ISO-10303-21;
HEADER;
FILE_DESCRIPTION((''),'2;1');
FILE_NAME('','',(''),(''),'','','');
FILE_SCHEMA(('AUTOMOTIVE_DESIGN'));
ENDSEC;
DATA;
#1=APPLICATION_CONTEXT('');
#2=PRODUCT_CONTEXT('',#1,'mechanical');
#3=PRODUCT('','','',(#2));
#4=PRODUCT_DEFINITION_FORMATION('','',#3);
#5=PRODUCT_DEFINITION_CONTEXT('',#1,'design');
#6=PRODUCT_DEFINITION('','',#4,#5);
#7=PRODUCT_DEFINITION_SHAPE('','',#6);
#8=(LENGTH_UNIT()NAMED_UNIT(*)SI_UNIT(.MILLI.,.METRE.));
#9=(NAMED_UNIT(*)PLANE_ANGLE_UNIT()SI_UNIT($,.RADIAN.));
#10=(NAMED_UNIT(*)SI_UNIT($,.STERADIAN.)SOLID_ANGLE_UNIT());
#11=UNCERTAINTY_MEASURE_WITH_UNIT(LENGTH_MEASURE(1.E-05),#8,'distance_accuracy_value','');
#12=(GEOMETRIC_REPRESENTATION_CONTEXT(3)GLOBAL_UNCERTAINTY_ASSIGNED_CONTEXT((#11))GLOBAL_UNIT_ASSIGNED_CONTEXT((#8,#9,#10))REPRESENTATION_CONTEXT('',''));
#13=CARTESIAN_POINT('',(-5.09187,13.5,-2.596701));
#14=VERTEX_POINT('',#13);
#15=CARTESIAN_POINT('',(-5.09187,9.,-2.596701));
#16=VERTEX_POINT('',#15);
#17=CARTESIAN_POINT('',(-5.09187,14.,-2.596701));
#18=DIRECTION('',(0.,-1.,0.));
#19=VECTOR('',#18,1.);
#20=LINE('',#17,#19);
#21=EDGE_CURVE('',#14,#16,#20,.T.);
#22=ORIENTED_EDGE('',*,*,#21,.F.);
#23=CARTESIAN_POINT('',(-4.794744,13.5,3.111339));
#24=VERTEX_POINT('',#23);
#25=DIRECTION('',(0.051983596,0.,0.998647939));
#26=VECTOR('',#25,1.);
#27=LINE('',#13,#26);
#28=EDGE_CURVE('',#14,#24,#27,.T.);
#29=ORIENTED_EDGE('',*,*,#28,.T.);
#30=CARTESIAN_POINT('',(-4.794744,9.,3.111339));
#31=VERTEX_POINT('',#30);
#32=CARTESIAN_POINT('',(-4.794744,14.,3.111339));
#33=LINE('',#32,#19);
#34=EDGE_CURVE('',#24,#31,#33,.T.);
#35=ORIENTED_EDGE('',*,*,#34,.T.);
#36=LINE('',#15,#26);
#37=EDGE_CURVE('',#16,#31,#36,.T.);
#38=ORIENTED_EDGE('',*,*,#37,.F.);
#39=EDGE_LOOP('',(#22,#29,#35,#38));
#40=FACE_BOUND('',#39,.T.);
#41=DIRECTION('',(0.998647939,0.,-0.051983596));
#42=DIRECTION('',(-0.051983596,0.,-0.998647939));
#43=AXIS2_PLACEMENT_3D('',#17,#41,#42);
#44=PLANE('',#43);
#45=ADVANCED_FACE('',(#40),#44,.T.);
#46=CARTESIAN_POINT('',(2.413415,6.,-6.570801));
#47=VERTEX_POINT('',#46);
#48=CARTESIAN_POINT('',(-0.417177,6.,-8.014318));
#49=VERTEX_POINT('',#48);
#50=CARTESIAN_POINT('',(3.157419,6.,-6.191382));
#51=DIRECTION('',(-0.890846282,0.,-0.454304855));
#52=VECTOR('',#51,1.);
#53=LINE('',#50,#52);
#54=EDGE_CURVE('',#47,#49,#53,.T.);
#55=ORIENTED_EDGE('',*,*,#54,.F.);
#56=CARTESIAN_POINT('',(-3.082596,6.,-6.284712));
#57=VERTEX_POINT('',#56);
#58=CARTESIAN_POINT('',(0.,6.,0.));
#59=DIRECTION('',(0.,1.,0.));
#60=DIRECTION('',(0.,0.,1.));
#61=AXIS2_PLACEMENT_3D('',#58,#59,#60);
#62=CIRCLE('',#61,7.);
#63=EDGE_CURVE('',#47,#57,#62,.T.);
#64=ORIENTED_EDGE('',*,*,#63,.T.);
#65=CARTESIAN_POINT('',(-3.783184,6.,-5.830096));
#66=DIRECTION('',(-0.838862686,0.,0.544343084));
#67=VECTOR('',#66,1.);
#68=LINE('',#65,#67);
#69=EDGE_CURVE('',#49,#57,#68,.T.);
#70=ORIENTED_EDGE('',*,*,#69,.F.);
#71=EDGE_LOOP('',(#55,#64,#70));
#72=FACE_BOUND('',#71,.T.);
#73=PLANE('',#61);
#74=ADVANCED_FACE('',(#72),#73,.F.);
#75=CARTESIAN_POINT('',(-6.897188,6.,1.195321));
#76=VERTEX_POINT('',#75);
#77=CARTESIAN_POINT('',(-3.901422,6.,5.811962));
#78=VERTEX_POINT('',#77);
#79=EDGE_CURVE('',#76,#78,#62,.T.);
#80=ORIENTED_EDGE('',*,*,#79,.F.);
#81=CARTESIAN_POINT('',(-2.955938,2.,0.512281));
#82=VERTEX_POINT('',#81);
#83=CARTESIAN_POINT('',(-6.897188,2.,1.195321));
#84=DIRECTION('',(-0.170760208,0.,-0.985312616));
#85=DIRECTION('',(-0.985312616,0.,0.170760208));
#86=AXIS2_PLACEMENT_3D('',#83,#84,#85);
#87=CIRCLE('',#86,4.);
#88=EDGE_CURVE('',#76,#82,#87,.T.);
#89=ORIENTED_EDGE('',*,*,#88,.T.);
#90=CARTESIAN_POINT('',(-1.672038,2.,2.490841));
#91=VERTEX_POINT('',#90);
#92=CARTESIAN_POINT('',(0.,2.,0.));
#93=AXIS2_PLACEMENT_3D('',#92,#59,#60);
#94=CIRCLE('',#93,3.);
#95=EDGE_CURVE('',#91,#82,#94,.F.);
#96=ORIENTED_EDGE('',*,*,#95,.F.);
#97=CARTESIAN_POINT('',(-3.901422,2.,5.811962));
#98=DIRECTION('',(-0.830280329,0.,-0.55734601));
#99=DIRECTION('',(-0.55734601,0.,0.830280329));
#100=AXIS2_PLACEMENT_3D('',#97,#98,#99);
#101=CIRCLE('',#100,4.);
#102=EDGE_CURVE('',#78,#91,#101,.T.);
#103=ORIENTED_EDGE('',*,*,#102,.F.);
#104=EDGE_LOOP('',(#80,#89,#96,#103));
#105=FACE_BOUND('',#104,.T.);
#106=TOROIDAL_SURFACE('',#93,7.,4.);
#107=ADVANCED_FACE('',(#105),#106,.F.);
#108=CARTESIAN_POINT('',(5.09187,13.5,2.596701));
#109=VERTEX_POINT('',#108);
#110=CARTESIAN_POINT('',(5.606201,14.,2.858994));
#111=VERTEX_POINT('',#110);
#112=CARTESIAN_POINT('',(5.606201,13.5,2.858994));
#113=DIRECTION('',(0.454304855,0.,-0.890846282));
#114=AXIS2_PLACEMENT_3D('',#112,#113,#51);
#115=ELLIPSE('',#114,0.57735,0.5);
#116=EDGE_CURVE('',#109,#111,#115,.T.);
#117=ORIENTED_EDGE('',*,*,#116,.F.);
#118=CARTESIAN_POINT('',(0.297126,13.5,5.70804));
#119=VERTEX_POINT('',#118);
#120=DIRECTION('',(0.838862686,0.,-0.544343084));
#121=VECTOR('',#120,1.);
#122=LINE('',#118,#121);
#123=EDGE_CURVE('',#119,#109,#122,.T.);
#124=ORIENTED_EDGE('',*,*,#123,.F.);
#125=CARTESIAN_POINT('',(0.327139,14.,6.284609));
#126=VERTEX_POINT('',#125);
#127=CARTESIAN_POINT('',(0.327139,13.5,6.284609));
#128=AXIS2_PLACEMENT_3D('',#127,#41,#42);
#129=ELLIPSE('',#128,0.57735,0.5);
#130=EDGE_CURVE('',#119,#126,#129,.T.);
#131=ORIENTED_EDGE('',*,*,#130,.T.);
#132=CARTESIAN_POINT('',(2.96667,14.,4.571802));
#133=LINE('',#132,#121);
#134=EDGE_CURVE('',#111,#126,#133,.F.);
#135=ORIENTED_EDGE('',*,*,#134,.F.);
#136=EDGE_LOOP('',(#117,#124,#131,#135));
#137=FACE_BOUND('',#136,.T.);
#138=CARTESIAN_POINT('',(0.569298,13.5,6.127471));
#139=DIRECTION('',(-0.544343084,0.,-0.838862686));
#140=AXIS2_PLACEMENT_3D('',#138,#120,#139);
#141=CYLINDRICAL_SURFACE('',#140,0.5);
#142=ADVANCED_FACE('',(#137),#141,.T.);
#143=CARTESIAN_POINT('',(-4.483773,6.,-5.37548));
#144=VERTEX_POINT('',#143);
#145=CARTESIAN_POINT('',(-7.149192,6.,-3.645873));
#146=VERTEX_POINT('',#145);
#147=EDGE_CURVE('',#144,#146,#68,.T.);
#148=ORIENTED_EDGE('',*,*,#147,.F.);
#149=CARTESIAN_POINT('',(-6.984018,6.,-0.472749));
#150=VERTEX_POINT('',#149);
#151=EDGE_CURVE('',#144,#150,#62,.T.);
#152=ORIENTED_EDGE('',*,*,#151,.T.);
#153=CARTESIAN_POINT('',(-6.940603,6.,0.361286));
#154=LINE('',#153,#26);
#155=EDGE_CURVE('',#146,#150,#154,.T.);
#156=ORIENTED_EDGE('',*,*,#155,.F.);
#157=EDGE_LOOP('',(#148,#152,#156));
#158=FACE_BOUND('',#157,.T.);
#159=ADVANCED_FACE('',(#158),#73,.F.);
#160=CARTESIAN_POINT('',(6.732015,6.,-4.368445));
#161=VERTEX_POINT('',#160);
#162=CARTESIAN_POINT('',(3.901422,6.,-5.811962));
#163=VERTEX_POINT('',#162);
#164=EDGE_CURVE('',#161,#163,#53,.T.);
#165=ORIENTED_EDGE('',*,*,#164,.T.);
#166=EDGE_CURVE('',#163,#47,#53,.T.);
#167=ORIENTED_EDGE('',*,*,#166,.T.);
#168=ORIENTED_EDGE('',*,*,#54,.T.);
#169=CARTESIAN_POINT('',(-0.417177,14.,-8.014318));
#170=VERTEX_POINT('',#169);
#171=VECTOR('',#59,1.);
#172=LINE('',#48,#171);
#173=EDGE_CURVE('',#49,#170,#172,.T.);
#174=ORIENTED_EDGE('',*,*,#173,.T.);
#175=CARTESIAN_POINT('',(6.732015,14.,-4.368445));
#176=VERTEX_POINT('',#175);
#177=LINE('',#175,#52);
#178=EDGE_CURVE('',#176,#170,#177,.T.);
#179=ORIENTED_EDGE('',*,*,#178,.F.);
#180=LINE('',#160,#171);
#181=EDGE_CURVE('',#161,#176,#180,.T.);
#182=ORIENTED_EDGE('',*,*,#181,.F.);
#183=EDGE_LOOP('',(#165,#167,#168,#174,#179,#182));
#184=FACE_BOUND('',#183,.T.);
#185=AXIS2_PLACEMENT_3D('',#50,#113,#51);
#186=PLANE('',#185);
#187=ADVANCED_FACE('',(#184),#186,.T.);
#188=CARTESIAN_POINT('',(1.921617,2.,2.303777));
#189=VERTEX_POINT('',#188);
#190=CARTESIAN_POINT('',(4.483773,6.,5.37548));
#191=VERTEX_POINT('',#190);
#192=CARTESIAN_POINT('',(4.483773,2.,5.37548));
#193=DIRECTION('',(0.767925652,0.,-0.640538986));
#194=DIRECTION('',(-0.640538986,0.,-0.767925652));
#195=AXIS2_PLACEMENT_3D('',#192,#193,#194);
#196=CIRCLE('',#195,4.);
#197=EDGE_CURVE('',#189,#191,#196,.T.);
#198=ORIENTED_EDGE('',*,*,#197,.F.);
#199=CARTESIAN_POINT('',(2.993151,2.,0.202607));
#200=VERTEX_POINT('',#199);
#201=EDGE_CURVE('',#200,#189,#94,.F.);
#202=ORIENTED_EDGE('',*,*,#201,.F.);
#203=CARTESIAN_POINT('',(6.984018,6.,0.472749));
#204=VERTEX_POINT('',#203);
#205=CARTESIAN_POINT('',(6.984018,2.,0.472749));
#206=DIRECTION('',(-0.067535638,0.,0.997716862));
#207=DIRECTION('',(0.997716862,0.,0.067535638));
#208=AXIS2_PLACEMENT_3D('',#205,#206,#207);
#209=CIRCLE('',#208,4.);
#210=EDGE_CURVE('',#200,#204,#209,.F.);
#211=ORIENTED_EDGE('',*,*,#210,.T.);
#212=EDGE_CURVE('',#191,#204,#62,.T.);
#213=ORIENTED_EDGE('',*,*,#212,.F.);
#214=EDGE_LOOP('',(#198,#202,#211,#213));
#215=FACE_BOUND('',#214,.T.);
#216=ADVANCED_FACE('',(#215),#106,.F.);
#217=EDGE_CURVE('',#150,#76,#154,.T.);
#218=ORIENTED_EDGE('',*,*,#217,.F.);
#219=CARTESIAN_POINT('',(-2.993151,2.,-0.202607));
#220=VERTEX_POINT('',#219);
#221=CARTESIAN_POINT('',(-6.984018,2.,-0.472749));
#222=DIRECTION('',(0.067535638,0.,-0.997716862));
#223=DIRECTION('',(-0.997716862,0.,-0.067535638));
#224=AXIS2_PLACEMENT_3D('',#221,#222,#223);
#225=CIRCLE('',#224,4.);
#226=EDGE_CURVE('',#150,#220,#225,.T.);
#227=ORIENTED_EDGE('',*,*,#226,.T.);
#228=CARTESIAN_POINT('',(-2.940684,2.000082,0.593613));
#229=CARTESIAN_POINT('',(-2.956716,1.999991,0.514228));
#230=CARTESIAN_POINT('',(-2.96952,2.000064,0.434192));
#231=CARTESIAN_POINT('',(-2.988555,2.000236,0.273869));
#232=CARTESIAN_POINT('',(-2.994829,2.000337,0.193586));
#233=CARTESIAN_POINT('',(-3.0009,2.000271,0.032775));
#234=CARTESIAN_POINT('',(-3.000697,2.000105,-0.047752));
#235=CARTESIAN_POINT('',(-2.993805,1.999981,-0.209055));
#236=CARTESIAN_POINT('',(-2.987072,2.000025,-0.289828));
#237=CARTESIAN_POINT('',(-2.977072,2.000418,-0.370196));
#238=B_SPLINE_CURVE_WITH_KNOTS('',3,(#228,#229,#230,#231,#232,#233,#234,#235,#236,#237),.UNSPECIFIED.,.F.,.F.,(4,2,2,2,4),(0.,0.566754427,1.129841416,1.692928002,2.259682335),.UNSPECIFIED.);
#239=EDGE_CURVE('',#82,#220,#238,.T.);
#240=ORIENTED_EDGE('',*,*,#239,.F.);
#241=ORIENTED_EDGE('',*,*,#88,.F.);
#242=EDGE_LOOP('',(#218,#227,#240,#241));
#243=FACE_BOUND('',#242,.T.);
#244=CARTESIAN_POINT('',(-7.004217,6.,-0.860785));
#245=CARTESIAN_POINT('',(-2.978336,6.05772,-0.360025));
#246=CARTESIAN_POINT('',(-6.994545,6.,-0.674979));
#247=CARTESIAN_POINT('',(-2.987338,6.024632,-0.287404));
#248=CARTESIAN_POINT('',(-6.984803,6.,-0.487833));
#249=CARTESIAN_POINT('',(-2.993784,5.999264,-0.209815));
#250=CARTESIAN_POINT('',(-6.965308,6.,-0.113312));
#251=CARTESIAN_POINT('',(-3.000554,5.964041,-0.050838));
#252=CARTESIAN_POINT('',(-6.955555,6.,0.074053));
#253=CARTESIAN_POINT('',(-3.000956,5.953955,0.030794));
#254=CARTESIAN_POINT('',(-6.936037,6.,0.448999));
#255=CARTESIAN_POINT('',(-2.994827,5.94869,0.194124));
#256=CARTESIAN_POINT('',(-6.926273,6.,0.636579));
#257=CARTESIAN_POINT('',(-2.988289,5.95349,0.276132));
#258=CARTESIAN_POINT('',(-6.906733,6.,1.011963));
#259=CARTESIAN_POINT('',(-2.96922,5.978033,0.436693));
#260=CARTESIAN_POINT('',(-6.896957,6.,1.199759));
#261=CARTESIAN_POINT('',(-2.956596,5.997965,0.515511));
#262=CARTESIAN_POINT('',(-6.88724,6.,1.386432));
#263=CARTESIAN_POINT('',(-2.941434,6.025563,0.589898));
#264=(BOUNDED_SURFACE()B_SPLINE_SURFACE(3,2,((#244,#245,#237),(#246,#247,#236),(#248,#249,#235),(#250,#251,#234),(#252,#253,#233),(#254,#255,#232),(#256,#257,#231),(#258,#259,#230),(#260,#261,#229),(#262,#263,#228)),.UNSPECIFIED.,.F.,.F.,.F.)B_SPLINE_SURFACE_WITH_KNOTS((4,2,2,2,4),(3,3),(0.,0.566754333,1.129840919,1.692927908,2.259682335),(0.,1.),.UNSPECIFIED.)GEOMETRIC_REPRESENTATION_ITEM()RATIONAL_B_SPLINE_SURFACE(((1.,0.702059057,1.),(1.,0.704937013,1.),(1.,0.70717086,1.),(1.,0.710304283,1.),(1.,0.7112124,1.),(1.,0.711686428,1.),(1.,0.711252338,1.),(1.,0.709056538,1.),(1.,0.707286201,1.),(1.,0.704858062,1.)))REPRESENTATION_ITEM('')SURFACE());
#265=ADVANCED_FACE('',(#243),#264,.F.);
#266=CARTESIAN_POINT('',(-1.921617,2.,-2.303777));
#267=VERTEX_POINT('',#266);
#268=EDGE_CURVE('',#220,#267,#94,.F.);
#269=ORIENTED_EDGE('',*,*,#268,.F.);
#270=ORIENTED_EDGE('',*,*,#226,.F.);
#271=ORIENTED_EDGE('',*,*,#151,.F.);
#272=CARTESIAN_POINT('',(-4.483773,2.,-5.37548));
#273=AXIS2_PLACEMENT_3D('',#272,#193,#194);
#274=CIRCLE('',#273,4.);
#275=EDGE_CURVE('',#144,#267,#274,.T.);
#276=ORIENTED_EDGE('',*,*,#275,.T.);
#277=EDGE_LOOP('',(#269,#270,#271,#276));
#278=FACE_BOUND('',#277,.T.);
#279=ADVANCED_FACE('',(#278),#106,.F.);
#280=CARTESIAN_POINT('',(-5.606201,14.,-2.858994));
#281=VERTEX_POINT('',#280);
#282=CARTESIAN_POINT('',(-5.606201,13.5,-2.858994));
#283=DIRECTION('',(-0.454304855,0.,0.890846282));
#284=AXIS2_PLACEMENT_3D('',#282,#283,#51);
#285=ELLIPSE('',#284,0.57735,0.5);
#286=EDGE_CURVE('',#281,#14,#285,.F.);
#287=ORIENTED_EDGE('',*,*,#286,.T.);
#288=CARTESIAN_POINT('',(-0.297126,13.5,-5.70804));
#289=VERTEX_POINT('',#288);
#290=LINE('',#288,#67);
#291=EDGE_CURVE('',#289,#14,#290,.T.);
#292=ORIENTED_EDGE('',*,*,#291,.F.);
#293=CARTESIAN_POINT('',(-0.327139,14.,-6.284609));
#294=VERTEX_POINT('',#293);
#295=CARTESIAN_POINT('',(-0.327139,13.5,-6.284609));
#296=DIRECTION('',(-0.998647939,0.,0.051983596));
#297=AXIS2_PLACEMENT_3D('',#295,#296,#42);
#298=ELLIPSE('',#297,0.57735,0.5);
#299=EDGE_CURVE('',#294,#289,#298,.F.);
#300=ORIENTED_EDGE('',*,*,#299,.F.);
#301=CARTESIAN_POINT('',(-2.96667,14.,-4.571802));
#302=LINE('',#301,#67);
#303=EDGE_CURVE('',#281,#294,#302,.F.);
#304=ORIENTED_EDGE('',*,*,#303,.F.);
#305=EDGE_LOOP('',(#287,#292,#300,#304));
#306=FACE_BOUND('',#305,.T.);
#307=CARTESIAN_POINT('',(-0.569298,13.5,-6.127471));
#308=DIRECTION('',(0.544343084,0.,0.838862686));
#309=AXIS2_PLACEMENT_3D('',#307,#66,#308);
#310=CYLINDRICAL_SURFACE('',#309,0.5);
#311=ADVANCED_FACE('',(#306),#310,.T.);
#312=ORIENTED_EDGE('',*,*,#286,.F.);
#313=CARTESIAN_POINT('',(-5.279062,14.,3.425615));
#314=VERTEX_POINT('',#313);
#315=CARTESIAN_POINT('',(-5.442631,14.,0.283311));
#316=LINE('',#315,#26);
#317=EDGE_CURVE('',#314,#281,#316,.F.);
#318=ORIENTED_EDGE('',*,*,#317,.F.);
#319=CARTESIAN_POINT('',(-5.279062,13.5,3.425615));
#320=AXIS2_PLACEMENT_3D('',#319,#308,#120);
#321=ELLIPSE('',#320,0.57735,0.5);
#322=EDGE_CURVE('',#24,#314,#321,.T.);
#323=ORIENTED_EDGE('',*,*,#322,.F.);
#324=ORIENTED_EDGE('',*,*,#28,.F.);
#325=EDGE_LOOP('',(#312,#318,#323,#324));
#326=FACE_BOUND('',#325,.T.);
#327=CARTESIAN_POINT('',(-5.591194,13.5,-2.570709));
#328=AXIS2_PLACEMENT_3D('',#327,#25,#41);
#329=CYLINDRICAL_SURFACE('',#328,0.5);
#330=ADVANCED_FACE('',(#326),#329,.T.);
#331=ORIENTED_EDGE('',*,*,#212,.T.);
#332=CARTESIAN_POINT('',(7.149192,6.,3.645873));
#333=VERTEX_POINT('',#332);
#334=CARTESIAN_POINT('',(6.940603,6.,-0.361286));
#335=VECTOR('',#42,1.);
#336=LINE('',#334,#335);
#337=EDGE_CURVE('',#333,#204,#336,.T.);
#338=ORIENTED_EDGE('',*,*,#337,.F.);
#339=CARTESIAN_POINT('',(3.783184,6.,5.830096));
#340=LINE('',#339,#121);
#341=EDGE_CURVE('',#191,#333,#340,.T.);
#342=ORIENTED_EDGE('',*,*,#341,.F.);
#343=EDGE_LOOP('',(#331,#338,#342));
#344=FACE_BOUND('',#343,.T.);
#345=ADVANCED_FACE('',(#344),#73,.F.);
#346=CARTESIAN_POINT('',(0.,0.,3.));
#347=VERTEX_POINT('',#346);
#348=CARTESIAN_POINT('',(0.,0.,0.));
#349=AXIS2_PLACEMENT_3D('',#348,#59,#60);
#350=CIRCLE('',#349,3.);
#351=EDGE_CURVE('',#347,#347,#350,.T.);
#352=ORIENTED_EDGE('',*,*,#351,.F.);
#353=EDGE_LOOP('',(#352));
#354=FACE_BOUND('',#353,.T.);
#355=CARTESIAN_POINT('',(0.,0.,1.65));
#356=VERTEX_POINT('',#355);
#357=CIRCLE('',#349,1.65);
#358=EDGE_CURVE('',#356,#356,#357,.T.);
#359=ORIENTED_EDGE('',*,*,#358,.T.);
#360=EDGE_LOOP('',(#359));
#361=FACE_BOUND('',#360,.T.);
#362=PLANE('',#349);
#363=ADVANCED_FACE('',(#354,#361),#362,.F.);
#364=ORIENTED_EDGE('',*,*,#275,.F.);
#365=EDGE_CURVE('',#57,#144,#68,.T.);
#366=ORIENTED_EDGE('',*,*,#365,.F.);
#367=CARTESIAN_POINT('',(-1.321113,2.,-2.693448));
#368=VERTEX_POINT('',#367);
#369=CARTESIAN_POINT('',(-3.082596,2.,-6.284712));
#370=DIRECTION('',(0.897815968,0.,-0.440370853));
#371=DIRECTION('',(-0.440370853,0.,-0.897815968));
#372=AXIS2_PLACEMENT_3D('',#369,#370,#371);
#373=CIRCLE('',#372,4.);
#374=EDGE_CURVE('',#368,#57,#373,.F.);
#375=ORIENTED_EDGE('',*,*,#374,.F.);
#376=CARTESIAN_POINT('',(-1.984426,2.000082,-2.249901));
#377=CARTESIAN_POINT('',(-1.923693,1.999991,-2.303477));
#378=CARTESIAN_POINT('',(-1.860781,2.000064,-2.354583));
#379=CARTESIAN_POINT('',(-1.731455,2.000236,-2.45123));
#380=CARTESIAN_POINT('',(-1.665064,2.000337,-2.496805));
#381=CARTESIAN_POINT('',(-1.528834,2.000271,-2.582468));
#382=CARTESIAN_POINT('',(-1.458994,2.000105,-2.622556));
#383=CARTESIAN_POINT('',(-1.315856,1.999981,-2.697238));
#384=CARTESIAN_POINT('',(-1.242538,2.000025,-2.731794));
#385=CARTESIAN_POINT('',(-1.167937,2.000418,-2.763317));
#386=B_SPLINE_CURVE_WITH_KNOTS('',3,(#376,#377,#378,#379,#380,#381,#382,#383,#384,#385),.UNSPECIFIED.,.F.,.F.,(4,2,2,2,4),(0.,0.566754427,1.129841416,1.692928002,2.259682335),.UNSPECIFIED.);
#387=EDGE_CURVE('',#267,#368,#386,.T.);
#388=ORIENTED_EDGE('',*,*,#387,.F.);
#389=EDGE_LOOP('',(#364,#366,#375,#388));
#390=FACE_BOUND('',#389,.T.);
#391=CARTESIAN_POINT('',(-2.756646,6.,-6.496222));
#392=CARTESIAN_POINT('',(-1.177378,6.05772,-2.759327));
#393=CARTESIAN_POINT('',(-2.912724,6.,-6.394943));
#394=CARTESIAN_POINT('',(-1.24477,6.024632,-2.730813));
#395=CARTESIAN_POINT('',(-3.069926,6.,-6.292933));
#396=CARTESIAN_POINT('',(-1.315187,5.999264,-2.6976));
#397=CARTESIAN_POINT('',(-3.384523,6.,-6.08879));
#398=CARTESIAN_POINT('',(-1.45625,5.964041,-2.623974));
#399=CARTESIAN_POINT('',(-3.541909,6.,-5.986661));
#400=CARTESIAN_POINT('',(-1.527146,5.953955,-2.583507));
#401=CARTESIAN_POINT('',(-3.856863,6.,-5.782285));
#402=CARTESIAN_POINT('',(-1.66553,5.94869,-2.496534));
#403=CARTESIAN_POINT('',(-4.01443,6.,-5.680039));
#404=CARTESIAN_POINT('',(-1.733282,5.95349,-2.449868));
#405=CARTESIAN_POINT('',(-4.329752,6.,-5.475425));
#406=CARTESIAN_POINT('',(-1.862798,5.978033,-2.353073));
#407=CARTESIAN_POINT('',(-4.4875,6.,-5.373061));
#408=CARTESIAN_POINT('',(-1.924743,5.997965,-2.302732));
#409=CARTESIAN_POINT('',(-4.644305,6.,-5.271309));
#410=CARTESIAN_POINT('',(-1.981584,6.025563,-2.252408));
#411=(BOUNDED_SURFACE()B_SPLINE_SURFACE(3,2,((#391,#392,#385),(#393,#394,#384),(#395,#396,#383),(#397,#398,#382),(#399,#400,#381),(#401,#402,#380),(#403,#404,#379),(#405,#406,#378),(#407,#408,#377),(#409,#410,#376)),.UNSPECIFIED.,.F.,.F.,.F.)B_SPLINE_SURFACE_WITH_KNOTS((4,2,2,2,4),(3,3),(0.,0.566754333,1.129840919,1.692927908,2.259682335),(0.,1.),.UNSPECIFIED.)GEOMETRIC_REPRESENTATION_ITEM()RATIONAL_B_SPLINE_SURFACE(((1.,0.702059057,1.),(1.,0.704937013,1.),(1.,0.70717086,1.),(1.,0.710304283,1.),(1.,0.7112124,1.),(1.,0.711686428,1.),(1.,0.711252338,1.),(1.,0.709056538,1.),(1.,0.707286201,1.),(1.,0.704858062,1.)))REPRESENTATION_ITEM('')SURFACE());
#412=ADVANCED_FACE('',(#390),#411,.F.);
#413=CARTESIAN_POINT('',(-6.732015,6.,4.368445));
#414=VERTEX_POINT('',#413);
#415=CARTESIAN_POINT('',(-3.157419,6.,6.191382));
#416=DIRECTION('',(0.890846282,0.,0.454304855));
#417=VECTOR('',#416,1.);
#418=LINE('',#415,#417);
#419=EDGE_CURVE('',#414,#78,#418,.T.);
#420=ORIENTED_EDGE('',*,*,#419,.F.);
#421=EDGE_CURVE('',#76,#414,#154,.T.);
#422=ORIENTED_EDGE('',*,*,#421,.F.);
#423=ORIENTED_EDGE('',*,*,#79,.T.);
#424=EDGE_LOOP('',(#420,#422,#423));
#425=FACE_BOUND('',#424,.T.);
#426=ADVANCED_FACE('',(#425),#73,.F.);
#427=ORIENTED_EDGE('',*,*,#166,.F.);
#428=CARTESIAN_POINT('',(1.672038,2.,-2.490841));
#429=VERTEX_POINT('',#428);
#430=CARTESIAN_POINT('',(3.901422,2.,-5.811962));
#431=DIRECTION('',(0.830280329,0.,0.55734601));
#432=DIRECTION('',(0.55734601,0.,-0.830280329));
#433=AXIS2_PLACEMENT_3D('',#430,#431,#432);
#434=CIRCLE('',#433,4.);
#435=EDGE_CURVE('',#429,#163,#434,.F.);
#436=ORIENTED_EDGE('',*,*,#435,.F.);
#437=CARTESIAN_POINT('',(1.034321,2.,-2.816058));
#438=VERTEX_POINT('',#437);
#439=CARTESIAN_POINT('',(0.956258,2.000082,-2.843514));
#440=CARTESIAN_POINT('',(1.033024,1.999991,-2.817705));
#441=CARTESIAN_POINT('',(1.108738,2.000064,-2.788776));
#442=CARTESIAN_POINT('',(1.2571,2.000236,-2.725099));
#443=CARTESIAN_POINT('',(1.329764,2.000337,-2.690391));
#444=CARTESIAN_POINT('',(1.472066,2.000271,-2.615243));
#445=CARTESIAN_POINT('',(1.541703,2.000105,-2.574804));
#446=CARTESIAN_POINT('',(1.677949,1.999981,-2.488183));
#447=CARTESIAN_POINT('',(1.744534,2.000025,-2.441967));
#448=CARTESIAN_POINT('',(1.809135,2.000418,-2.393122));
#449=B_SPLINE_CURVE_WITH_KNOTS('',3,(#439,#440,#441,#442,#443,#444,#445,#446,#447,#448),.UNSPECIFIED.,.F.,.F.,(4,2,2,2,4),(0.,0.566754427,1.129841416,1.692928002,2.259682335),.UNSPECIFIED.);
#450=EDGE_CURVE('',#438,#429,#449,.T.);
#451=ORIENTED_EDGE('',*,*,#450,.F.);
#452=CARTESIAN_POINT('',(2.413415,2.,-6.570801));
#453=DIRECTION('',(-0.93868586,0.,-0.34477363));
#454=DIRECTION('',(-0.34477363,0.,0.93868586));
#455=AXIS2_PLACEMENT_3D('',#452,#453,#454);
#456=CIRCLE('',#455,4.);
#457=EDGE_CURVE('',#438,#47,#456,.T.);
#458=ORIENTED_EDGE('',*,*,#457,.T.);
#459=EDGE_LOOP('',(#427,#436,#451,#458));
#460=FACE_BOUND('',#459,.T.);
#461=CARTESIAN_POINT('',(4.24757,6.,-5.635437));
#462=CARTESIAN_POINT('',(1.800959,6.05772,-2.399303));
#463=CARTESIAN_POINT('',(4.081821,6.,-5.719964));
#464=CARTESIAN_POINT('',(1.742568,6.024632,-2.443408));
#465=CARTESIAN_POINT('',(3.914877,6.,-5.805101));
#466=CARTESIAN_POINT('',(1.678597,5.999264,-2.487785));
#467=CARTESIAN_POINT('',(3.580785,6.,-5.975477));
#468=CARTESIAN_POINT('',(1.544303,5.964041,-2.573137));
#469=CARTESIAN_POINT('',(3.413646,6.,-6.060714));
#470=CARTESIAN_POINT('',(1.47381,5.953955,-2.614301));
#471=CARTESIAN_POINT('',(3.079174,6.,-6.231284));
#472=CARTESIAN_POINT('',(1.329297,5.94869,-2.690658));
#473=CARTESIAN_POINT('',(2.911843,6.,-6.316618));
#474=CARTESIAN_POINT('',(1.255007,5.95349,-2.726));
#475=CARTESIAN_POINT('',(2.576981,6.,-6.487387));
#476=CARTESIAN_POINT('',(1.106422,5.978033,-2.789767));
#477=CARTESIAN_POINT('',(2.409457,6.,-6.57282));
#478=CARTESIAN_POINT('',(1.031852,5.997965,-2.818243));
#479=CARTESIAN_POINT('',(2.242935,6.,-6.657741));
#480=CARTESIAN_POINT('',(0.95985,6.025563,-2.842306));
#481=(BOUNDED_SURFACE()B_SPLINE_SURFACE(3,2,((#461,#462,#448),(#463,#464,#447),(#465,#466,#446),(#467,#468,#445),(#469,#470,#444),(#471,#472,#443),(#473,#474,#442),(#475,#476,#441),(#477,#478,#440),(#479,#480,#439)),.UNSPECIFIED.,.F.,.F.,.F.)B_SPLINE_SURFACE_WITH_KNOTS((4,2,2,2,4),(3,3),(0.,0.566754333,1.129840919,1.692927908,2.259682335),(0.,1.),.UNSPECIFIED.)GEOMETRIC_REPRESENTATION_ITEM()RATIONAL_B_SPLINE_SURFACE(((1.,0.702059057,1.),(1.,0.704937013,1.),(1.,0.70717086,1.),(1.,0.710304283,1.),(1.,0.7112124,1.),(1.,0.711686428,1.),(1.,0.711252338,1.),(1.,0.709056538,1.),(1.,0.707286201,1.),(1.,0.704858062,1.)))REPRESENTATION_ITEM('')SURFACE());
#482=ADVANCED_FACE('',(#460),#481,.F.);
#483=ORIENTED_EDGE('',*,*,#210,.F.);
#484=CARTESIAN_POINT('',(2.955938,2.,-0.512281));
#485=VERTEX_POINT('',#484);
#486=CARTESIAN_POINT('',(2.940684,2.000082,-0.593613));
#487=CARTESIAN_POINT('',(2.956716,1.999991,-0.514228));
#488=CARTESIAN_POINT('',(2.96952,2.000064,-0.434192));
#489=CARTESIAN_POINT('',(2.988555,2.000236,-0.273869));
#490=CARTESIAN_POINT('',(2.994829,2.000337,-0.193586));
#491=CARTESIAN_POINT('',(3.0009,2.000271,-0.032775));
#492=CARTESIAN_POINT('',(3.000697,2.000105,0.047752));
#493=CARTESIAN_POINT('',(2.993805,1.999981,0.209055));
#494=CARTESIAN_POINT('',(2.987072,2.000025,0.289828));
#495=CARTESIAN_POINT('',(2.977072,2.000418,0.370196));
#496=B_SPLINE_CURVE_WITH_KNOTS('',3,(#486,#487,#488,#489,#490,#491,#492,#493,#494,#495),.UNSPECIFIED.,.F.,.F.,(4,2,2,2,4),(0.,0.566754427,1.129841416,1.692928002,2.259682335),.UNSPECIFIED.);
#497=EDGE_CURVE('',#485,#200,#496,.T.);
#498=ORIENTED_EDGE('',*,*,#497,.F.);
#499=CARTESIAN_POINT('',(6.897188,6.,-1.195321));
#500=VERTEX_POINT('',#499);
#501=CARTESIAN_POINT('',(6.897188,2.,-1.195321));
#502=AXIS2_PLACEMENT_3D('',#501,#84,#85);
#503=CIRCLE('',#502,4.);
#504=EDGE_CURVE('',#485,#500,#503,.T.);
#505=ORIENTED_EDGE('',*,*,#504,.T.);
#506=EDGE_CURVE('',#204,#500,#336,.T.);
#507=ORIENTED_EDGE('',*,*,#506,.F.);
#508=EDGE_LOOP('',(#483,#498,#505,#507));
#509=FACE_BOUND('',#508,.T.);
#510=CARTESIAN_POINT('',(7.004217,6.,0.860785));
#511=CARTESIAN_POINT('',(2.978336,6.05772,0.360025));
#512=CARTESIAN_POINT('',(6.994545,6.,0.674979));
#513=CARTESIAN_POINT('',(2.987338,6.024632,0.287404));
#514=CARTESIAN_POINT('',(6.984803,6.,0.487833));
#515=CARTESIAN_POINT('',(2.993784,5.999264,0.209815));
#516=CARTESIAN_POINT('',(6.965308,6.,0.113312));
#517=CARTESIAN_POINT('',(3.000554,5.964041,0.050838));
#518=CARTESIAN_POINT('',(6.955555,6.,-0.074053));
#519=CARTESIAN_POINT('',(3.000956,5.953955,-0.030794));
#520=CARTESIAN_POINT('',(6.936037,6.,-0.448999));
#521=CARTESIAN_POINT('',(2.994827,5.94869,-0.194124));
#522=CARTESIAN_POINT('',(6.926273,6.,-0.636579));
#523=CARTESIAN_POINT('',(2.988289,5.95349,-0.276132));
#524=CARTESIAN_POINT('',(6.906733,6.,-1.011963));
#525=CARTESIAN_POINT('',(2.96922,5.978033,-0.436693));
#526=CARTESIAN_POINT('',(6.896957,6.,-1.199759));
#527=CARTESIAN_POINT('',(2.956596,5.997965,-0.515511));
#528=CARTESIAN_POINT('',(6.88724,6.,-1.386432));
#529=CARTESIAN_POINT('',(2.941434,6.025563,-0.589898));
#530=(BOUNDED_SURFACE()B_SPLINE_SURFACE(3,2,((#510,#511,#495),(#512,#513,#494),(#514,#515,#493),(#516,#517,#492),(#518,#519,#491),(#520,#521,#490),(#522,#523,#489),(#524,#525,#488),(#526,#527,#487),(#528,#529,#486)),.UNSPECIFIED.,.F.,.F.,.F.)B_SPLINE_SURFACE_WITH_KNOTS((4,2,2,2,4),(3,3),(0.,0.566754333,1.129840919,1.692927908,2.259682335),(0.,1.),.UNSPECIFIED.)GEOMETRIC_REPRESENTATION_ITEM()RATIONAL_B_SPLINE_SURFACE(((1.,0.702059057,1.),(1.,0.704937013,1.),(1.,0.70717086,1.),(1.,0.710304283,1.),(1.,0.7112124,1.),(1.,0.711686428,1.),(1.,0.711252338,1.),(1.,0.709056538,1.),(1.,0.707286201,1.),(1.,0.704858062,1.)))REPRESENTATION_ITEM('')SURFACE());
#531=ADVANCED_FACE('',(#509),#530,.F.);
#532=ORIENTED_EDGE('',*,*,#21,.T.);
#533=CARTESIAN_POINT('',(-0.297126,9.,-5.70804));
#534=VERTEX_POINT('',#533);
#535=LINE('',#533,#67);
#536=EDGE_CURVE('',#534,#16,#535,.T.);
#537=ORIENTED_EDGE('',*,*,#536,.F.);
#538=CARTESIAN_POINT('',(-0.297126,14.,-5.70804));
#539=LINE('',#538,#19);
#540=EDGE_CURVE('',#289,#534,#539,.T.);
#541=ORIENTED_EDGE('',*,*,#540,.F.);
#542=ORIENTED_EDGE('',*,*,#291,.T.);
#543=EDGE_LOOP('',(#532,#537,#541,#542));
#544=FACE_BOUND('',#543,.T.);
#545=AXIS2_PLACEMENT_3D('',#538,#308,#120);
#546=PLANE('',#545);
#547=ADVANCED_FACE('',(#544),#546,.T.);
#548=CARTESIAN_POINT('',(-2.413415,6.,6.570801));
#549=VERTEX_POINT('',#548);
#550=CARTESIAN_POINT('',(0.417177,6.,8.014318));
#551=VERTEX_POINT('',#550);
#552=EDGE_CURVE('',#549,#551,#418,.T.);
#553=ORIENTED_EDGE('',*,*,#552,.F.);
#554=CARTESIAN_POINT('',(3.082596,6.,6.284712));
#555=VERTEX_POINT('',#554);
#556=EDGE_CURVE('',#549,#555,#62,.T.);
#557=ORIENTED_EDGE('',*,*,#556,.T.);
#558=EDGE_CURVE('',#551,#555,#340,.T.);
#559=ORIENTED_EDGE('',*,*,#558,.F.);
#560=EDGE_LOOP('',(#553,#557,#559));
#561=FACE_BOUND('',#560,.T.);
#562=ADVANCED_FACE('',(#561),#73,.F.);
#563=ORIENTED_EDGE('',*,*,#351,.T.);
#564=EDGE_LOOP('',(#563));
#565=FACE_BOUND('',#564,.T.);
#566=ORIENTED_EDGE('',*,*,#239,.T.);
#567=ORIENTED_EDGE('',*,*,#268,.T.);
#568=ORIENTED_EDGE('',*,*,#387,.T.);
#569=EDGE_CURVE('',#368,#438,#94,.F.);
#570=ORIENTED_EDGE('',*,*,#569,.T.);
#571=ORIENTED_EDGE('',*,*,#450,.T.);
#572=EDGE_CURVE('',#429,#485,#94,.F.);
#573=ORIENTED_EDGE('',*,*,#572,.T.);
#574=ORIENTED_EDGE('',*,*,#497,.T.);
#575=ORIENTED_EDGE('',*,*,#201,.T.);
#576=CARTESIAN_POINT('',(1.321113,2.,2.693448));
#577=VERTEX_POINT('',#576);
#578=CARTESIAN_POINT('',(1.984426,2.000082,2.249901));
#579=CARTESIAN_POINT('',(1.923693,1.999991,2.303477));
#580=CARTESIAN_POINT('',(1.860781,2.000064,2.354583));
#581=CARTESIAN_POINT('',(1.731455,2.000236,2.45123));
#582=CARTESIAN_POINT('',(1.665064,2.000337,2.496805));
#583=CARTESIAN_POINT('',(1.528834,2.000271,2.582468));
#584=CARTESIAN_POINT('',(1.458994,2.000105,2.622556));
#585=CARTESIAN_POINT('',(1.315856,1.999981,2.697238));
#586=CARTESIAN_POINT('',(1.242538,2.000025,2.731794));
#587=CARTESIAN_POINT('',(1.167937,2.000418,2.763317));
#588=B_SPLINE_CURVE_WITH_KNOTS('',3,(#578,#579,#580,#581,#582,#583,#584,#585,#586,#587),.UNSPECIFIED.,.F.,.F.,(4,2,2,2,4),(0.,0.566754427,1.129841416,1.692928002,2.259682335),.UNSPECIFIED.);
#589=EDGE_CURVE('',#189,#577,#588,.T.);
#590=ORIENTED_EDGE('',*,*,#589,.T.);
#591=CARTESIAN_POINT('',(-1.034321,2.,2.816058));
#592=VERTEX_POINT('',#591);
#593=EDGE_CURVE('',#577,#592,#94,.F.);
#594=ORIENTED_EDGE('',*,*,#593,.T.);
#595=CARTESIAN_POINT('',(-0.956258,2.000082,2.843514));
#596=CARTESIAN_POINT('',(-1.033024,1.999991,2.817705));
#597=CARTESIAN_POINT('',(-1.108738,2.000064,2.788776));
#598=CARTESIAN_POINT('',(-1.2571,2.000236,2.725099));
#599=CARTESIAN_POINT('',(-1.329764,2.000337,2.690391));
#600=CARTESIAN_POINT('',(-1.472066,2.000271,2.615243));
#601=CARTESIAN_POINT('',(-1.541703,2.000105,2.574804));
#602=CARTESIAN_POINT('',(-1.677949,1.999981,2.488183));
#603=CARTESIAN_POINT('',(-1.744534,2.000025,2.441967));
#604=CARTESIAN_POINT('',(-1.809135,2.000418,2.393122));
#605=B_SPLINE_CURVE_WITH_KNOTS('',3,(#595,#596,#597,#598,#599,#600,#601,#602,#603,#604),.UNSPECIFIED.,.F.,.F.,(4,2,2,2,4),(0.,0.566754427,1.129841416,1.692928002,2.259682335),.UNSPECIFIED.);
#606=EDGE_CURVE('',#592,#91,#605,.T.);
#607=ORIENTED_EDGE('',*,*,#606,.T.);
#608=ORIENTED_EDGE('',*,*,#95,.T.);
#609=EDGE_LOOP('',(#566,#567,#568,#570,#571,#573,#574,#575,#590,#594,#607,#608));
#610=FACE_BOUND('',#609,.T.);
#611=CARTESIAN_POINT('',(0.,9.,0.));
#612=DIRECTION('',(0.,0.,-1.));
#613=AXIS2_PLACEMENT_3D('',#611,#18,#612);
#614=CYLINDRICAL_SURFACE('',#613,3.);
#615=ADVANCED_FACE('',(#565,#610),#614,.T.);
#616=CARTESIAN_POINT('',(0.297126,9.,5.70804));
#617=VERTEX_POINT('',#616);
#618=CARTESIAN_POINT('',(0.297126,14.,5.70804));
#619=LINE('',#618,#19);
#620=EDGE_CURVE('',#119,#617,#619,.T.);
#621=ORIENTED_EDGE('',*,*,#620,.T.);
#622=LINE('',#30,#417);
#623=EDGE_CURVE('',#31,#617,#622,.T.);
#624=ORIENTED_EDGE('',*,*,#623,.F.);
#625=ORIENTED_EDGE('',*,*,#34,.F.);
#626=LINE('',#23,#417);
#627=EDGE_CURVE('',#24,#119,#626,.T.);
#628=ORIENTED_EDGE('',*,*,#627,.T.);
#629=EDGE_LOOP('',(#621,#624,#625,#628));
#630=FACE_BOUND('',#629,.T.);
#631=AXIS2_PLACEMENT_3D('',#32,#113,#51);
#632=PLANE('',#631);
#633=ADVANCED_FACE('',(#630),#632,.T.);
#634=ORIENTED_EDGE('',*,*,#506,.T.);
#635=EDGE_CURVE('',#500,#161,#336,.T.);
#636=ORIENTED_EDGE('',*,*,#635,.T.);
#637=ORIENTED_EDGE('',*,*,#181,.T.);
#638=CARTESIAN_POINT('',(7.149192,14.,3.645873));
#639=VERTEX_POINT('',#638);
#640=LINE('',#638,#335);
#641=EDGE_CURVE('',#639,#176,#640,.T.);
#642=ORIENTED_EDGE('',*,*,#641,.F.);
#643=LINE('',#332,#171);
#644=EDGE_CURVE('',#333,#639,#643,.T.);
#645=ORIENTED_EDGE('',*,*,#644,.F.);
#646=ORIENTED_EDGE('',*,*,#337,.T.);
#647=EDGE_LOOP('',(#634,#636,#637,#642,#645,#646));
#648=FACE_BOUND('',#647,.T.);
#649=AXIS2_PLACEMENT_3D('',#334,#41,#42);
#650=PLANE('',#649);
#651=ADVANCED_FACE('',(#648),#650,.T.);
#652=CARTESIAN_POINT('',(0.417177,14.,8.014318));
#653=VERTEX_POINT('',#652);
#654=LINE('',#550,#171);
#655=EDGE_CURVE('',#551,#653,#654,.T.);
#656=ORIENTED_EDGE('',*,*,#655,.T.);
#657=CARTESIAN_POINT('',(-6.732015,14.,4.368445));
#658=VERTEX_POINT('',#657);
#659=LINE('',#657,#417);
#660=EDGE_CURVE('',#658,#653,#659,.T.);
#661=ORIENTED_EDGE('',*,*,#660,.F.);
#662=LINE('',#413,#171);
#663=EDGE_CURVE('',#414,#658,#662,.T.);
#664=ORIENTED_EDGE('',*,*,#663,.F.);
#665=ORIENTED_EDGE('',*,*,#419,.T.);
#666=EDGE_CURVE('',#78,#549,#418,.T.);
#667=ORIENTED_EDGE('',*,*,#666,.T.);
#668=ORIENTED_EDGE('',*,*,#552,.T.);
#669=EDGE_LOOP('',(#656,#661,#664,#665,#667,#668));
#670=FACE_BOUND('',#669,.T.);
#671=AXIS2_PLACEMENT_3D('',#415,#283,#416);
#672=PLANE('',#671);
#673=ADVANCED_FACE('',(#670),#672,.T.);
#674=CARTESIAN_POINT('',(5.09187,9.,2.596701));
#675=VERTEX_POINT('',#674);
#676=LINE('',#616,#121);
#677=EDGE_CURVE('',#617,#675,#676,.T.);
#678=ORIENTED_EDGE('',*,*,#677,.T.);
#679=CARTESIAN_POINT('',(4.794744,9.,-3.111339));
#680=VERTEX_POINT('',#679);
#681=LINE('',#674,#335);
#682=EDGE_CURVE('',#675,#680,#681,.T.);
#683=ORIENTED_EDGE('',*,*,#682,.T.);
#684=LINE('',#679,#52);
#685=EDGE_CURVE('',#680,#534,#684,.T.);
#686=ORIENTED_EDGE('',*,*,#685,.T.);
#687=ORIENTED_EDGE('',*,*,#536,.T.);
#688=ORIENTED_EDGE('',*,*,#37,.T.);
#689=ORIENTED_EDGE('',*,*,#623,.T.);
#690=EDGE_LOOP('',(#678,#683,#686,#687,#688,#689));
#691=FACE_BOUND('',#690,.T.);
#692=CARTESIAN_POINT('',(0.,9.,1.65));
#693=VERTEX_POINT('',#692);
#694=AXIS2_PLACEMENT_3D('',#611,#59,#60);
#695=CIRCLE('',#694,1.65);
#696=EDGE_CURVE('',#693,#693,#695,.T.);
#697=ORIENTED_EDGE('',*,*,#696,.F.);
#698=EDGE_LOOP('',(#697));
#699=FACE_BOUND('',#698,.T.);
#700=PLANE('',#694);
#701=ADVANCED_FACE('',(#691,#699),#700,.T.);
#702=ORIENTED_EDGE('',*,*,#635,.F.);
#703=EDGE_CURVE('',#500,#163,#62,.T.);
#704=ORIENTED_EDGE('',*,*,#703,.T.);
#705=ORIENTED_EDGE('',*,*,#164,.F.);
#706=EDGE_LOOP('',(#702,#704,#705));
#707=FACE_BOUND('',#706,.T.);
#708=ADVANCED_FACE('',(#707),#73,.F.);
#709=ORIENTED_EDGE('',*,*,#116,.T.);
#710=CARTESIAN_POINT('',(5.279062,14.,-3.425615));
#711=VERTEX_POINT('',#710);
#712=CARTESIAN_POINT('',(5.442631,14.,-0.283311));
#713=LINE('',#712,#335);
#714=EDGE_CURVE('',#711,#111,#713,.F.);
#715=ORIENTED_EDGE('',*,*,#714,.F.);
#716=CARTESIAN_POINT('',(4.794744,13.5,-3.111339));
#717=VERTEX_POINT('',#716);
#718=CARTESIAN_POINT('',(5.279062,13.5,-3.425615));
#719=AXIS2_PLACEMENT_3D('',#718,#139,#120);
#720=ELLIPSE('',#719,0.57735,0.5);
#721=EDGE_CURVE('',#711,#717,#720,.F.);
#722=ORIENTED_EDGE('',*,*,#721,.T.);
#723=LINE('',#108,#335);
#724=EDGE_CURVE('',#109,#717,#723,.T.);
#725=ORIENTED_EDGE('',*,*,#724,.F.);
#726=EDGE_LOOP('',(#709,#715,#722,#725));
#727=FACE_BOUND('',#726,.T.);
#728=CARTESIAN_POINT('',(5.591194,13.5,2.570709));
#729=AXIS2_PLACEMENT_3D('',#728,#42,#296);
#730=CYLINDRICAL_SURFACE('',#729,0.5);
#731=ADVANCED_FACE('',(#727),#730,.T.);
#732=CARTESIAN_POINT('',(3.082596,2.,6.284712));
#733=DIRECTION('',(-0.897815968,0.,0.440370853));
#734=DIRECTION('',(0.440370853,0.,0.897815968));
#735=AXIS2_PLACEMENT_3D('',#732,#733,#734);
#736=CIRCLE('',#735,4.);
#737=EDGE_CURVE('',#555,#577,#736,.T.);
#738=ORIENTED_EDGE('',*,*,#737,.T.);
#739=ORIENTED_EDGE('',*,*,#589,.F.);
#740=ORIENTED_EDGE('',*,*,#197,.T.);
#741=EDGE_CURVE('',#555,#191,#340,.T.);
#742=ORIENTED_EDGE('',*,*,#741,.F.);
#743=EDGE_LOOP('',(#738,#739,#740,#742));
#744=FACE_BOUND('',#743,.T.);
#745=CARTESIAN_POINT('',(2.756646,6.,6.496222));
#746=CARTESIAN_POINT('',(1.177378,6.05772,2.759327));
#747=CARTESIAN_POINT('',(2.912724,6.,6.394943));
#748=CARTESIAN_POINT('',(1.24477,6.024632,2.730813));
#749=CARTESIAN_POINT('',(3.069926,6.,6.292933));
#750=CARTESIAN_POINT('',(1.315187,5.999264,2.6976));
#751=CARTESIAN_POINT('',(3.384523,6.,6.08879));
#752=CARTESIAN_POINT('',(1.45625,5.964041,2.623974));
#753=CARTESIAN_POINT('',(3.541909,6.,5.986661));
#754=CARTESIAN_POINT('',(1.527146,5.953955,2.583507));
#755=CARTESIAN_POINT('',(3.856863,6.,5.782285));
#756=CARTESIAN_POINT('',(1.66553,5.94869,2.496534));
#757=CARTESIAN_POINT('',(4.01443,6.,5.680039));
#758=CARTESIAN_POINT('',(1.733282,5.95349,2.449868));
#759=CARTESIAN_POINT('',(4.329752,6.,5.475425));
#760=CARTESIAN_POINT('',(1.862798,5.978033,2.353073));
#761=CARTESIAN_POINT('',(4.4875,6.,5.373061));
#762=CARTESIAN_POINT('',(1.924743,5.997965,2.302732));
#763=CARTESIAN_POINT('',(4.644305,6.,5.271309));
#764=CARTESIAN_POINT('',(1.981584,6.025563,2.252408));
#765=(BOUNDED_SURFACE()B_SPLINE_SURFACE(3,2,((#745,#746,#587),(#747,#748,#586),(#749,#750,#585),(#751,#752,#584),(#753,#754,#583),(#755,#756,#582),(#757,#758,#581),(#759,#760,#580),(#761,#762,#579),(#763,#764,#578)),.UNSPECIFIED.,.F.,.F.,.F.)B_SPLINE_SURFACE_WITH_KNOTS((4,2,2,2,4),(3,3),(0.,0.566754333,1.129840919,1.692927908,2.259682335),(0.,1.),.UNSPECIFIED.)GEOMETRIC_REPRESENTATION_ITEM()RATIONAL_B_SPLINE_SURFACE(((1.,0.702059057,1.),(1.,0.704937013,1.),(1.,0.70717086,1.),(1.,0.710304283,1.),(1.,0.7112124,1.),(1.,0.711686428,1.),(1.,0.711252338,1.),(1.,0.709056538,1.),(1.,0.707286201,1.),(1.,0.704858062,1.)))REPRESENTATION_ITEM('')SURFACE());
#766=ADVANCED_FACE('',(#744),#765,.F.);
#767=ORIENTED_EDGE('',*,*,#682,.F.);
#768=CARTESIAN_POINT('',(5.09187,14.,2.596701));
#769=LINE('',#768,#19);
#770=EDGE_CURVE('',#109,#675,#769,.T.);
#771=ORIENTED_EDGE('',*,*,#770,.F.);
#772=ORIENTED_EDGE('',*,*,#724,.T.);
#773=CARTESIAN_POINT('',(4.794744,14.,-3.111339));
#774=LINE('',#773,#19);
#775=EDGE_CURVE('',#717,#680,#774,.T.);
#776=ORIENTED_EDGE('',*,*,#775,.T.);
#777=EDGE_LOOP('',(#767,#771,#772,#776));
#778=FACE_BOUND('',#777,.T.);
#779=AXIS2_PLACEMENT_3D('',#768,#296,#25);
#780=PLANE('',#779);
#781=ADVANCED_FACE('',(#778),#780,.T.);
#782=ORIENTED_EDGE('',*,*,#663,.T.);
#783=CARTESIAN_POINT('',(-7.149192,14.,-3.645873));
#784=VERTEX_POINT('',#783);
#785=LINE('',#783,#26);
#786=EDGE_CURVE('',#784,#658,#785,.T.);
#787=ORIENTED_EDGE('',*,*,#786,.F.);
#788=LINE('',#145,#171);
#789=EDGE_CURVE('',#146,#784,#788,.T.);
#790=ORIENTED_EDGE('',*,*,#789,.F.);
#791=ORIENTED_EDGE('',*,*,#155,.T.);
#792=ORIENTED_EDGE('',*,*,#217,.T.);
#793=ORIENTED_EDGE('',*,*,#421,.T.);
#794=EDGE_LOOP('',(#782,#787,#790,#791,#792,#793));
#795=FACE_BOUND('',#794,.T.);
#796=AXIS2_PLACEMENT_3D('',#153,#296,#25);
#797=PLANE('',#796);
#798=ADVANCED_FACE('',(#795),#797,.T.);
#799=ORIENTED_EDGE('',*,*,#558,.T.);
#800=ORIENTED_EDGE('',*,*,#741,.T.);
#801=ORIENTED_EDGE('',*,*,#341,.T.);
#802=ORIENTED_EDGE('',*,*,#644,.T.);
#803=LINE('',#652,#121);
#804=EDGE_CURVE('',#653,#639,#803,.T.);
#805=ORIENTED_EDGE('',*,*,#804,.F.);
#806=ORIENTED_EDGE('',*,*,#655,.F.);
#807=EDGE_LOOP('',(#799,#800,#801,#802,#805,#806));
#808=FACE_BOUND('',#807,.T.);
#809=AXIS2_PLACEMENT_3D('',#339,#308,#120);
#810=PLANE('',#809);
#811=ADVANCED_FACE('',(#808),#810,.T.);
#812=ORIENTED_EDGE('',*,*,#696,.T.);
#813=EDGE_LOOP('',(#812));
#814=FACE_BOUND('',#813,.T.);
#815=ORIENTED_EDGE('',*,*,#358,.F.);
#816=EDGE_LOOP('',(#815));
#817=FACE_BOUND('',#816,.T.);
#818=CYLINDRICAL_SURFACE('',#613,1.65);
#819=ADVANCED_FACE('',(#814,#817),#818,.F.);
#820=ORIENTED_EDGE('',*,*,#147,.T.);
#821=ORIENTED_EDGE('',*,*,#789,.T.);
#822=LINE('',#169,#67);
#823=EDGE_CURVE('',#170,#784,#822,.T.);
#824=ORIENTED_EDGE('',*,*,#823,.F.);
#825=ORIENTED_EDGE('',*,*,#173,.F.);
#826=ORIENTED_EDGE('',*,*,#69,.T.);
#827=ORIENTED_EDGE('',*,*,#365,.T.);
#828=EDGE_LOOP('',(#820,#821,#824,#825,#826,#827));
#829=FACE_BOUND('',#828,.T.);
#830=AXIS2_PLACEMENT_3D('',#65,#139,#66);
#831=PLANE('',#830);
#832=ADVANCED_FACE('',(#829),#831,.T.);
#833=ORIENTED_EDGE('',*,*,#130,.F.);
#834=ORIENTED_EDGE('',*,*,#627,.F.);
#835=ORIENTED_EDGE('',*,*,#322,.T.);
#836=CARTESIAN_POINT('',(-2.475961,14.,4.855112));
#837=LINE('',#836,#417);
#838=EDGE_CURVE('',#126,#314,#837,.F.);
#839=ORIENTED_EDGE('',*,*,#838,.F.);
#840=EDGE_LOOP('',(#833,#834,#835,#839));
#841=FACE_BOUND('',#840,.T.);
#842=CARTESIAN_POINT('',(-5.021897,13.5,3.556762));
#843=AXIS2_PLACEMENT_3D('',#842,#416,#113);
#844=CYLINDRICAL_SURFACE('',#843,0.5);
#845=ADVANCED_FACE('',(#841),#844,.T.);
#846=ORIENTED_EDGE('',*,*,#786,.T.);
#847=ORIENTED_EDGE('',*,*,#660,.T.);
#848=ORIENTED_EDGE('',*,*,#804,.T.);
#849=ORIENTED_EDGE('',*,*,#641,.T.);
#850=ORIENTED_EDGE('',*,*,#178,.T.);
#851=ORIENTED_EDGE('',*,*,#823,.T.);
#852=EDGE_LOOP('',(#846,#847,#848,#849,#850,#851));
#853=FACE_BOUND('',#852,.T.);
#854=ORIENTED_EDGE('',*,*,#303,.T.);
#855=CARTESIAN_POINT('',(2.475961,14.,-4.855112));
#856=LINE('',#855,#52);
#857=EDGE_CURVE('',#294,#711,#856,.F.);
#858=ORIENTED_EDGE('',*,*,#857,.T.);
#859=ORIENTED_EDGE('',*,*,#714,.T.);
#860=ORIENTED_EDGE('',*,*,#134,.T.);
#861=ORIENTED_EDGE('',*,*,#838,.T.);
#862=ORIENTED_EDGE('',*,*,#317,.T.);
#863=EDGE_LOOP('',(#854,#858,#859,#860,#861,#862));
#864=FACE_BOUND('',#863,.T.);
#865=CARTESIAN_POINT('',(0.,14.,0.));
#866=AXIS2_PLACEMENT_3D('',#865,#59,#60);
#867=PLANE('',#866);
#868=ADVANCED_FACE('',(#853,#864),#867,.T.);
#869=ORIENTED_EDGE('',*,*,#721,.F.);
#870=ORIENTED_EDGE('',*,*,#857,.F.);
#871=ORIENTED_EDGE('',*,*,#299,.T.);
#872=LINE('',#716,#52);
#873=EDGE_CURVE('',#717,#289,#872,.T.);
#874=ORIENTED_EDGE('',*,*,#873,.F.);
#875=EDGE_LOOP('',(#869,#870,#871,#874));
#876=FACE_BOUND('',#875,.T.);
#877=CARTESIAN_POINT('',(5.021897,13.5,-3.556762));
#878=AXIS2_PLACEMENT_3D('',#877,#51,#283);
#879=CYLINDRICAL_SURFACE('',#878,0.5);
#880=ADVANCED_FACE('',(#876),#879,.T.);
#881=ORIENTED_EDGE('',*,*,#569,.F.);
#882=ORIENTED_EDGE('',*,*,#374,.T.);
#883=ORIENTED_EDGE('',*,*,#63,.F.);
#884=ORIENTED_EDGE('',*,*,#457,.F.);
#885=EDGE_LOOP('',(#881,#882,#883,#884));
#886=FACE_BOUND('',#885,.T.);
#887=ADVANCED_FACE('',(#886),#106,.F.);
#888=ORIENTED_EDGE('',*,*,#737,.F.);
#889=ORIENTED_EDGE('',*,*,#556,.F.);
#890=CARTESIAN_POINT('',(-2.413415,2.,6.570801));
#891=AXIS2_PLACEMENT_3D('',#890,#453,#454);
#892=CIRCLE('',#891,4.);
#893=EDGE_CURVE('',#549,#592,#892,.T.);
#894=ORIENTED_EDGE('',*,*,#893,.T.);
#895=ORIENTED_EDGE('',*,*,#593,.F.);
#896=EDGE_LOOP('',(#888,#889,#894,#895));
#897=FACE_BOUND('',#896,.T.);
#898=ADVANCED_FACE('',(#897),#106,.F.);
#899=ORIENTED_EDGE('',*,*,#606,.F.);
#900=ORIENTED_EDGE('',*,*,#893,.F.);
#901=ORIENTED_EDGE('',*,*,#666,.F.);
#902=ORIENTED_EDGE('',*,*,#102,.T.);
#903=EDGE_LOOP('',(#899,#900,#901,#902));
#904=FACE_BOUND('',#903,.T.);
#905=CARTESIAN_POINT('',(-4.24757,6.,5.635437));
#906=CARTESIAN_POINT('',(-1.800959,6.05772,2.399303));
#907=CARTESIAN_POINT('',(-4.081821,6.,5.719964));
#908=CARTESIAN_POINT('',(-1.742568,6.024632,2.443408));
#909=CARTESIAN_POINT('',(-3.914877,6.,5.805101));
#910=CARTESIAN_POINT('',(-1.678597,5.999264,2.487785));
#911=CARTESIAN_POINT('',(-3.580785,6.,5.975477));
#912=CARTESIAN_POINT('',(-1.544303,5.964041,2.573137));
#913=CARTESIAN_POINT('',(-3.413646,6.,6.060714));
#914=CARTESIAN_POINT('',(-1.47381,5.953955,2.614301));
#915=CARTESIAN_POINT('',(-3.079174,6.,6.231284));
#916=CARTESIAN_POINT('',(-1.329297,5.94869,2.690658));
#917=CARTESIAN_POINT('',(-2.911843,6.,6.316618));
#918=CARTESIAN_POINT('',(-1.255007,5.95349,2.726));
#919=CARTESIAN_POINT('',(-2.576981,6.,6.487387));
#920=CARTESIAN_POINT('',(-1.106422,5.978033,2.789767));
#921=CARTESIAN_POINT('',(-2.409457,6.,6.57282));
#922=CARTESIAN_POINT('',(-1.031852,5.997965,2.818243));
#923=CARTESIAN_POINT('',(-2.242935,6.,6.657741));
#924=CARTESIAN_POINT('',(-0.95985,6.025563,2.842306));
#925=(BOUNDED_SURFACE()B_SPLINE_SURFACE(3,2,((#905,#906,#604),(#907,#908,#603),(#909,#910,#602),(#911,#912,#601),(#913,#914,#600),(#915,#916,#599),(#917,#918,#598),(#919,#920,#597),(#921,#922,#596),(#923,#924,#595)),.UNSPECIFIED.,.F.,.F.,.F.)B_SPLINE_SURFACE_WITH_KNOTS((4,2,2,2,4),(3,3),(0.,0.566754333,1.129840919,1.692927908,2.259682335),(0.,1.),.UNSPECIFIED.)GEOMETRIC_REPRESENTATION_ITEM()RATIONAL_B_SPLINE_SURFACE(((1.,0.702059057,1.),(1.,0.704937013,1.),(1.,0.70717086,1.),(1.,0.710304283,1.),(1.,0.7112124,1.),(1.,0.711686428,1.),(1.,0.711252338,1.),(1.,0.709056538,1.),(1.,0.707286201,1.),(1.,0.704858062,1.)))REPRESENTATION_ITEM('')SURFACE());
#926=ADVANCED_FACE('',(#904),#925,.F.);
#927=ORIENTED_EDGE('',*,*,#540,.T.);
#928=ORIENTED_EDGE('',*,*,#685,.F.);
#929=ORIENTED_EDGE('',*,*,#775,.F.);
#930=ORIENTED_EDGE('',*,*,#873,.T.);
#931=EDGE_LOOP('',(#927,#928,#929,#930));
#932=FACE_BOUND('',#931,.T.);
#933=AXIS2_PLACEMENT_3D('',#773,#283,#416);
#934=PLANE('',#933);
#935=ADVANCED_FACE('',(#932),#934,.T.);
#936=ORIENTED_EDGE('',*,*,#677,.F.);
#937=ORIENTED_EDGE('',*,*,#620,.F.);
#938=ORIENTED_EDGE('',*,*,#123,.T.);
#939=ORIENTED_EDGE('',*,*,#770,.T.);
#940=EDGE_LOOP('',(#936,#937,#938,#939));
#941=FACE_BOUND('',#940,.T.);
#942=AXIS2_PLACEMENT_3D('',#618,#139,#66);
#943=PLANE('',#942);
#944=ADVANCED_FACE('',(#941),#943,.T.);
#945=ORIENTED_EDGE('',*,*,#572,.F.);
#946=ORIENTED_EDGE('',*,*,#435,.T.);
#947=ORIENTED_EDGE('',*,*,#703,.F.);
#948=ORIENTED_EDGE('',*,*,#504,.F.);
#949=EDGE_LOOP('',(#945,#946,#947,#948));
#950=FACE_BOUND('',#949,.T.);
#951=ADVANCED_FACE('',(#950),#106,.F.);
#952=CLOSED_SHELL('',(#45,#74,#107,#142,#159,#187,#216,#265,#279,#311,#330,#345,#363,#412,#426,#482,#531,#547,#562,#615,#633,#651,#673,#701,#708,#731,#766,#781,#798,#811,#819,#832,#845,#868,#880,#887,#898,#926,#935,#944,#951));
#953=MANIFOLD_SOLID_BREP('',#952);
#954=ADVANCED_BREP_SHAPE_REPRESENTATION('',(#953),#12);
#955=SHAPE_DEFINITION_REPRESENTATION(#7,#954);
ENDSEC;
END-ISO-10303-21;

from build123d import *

# Parameters (mm, degrees)
SKETCH1_R           = 3
BOSS_EXTRUDE1_DEPTH = 9
BOSS_EXTRUDE2_DEPTH = 5
BOSS_EXTRUDE3_START = -3
SKETCH2_3_R         = 3
BOSS_EXTRUDE3_DEPTH = 3
FILLET1_R           = 4
FILLET2_R           = 0.5


with BuildPart() as part:
    # Sketch1 → Boss-Extrude1 (new body)
    with BuildSketch(Plane(origin=(0, 0, 0), x_dir=(1, 0, 0), z_dir=(0, 1, 0))):
        Circle(SKETCH1_R)
        with BuildLine():
            ThreePointArc((1.65, 0), (-0.588756448, -1.541384392), (-1.229837388, 1.1))
            ThreePointArc((-1.229837388, 1.1), (0, 1.65), (1.229837388, 1.1))
            ThreePointArc((1.229837388, 1.1), (1.541384392, 0.588756448), (1.65, 0))
        make_face(mode=Mode.SUBTRACT)
    extrude(amount=BOSS_EXTRUDE1_DEPTH)



with BuildPart() as body_2:
    # Sketch2 → Boss-Extrude2 (new body)
    with BuildSketch(Plane(origin=(0, 9, 0), x_dir=(1, 0, 0), z_dir=(0, 1, 0))):
        Polygon((-0.41717713, 8.014318223), (-7.14919174, 3.645873119), (-6.73201461, -4.368445104), (0.41717713, -8.014318223), (7.14919174, -3.645873119), (6.73201461, 4.368445104), align=None)
        Polygon((-4.794744219, -3.111338599), (0.297126157, -5.708039598), (5.091870376, -2.596700998), (4.794744219, 3.111338599), (-0.297126157, 5.708039598), (-5.091870376, 2.596700998), align=None, mode=Mode.SUBTRACT)
    extrude(amount=BOSS_EXTRUDE2_DEPTH)


with BuildPart() as part_1:
    add(part.part)

    add(body_2.part)  # Boss-Extrude3 merges body 2
    # Sketch2<3> → Boss-Extrude3 (add)
    with BuildSketch(Plane(origin=(0, 9, 0), x_dir=(1, 0, 0), z_dir=(0, 1, 0)).offset(BOSS_EXTRUDE3_START)):
        Polygon((6.73201461, 4.368445104), (-0.41717713, 8.014318223), (-7.14919174, 3.645873119), (-6.73201461, -4.368445104), (0.41717713, -8.014318223), (7.14919174, -3.645873119), align=None)
        Circle(SKETCH2_3_R, mode=Mode.SUBTRACT)
    extrude(amount=BOSS_EXTRUDE3_DEPTH)

    # Fillet1
    fillet1_edges = [part_1.edges().sort_by_distance(p)[0] for p in [
        (-3, 6, 0),
    ]]
    fillet(fillet1_edges, radius=FILLET1_R)

    # Fillet2
    fillet2_edges = [part_1.edges().sort_by_distance(p)[0] for p in [
        (4.943307297, 14, -0.2573188),
        (2.694498267, 14, 4.152370298),
        (-2.248809031, 14, 4.409689098),
        (2.248809031, 14, -4.409689098),
        (-2.694498267, 14, -4.152370298),
        (-4.943307297, 14, 0.2573188),
    ]]
    fillet(fillet2_edges, radius=FILLET2_R)


solid = part_1.part
